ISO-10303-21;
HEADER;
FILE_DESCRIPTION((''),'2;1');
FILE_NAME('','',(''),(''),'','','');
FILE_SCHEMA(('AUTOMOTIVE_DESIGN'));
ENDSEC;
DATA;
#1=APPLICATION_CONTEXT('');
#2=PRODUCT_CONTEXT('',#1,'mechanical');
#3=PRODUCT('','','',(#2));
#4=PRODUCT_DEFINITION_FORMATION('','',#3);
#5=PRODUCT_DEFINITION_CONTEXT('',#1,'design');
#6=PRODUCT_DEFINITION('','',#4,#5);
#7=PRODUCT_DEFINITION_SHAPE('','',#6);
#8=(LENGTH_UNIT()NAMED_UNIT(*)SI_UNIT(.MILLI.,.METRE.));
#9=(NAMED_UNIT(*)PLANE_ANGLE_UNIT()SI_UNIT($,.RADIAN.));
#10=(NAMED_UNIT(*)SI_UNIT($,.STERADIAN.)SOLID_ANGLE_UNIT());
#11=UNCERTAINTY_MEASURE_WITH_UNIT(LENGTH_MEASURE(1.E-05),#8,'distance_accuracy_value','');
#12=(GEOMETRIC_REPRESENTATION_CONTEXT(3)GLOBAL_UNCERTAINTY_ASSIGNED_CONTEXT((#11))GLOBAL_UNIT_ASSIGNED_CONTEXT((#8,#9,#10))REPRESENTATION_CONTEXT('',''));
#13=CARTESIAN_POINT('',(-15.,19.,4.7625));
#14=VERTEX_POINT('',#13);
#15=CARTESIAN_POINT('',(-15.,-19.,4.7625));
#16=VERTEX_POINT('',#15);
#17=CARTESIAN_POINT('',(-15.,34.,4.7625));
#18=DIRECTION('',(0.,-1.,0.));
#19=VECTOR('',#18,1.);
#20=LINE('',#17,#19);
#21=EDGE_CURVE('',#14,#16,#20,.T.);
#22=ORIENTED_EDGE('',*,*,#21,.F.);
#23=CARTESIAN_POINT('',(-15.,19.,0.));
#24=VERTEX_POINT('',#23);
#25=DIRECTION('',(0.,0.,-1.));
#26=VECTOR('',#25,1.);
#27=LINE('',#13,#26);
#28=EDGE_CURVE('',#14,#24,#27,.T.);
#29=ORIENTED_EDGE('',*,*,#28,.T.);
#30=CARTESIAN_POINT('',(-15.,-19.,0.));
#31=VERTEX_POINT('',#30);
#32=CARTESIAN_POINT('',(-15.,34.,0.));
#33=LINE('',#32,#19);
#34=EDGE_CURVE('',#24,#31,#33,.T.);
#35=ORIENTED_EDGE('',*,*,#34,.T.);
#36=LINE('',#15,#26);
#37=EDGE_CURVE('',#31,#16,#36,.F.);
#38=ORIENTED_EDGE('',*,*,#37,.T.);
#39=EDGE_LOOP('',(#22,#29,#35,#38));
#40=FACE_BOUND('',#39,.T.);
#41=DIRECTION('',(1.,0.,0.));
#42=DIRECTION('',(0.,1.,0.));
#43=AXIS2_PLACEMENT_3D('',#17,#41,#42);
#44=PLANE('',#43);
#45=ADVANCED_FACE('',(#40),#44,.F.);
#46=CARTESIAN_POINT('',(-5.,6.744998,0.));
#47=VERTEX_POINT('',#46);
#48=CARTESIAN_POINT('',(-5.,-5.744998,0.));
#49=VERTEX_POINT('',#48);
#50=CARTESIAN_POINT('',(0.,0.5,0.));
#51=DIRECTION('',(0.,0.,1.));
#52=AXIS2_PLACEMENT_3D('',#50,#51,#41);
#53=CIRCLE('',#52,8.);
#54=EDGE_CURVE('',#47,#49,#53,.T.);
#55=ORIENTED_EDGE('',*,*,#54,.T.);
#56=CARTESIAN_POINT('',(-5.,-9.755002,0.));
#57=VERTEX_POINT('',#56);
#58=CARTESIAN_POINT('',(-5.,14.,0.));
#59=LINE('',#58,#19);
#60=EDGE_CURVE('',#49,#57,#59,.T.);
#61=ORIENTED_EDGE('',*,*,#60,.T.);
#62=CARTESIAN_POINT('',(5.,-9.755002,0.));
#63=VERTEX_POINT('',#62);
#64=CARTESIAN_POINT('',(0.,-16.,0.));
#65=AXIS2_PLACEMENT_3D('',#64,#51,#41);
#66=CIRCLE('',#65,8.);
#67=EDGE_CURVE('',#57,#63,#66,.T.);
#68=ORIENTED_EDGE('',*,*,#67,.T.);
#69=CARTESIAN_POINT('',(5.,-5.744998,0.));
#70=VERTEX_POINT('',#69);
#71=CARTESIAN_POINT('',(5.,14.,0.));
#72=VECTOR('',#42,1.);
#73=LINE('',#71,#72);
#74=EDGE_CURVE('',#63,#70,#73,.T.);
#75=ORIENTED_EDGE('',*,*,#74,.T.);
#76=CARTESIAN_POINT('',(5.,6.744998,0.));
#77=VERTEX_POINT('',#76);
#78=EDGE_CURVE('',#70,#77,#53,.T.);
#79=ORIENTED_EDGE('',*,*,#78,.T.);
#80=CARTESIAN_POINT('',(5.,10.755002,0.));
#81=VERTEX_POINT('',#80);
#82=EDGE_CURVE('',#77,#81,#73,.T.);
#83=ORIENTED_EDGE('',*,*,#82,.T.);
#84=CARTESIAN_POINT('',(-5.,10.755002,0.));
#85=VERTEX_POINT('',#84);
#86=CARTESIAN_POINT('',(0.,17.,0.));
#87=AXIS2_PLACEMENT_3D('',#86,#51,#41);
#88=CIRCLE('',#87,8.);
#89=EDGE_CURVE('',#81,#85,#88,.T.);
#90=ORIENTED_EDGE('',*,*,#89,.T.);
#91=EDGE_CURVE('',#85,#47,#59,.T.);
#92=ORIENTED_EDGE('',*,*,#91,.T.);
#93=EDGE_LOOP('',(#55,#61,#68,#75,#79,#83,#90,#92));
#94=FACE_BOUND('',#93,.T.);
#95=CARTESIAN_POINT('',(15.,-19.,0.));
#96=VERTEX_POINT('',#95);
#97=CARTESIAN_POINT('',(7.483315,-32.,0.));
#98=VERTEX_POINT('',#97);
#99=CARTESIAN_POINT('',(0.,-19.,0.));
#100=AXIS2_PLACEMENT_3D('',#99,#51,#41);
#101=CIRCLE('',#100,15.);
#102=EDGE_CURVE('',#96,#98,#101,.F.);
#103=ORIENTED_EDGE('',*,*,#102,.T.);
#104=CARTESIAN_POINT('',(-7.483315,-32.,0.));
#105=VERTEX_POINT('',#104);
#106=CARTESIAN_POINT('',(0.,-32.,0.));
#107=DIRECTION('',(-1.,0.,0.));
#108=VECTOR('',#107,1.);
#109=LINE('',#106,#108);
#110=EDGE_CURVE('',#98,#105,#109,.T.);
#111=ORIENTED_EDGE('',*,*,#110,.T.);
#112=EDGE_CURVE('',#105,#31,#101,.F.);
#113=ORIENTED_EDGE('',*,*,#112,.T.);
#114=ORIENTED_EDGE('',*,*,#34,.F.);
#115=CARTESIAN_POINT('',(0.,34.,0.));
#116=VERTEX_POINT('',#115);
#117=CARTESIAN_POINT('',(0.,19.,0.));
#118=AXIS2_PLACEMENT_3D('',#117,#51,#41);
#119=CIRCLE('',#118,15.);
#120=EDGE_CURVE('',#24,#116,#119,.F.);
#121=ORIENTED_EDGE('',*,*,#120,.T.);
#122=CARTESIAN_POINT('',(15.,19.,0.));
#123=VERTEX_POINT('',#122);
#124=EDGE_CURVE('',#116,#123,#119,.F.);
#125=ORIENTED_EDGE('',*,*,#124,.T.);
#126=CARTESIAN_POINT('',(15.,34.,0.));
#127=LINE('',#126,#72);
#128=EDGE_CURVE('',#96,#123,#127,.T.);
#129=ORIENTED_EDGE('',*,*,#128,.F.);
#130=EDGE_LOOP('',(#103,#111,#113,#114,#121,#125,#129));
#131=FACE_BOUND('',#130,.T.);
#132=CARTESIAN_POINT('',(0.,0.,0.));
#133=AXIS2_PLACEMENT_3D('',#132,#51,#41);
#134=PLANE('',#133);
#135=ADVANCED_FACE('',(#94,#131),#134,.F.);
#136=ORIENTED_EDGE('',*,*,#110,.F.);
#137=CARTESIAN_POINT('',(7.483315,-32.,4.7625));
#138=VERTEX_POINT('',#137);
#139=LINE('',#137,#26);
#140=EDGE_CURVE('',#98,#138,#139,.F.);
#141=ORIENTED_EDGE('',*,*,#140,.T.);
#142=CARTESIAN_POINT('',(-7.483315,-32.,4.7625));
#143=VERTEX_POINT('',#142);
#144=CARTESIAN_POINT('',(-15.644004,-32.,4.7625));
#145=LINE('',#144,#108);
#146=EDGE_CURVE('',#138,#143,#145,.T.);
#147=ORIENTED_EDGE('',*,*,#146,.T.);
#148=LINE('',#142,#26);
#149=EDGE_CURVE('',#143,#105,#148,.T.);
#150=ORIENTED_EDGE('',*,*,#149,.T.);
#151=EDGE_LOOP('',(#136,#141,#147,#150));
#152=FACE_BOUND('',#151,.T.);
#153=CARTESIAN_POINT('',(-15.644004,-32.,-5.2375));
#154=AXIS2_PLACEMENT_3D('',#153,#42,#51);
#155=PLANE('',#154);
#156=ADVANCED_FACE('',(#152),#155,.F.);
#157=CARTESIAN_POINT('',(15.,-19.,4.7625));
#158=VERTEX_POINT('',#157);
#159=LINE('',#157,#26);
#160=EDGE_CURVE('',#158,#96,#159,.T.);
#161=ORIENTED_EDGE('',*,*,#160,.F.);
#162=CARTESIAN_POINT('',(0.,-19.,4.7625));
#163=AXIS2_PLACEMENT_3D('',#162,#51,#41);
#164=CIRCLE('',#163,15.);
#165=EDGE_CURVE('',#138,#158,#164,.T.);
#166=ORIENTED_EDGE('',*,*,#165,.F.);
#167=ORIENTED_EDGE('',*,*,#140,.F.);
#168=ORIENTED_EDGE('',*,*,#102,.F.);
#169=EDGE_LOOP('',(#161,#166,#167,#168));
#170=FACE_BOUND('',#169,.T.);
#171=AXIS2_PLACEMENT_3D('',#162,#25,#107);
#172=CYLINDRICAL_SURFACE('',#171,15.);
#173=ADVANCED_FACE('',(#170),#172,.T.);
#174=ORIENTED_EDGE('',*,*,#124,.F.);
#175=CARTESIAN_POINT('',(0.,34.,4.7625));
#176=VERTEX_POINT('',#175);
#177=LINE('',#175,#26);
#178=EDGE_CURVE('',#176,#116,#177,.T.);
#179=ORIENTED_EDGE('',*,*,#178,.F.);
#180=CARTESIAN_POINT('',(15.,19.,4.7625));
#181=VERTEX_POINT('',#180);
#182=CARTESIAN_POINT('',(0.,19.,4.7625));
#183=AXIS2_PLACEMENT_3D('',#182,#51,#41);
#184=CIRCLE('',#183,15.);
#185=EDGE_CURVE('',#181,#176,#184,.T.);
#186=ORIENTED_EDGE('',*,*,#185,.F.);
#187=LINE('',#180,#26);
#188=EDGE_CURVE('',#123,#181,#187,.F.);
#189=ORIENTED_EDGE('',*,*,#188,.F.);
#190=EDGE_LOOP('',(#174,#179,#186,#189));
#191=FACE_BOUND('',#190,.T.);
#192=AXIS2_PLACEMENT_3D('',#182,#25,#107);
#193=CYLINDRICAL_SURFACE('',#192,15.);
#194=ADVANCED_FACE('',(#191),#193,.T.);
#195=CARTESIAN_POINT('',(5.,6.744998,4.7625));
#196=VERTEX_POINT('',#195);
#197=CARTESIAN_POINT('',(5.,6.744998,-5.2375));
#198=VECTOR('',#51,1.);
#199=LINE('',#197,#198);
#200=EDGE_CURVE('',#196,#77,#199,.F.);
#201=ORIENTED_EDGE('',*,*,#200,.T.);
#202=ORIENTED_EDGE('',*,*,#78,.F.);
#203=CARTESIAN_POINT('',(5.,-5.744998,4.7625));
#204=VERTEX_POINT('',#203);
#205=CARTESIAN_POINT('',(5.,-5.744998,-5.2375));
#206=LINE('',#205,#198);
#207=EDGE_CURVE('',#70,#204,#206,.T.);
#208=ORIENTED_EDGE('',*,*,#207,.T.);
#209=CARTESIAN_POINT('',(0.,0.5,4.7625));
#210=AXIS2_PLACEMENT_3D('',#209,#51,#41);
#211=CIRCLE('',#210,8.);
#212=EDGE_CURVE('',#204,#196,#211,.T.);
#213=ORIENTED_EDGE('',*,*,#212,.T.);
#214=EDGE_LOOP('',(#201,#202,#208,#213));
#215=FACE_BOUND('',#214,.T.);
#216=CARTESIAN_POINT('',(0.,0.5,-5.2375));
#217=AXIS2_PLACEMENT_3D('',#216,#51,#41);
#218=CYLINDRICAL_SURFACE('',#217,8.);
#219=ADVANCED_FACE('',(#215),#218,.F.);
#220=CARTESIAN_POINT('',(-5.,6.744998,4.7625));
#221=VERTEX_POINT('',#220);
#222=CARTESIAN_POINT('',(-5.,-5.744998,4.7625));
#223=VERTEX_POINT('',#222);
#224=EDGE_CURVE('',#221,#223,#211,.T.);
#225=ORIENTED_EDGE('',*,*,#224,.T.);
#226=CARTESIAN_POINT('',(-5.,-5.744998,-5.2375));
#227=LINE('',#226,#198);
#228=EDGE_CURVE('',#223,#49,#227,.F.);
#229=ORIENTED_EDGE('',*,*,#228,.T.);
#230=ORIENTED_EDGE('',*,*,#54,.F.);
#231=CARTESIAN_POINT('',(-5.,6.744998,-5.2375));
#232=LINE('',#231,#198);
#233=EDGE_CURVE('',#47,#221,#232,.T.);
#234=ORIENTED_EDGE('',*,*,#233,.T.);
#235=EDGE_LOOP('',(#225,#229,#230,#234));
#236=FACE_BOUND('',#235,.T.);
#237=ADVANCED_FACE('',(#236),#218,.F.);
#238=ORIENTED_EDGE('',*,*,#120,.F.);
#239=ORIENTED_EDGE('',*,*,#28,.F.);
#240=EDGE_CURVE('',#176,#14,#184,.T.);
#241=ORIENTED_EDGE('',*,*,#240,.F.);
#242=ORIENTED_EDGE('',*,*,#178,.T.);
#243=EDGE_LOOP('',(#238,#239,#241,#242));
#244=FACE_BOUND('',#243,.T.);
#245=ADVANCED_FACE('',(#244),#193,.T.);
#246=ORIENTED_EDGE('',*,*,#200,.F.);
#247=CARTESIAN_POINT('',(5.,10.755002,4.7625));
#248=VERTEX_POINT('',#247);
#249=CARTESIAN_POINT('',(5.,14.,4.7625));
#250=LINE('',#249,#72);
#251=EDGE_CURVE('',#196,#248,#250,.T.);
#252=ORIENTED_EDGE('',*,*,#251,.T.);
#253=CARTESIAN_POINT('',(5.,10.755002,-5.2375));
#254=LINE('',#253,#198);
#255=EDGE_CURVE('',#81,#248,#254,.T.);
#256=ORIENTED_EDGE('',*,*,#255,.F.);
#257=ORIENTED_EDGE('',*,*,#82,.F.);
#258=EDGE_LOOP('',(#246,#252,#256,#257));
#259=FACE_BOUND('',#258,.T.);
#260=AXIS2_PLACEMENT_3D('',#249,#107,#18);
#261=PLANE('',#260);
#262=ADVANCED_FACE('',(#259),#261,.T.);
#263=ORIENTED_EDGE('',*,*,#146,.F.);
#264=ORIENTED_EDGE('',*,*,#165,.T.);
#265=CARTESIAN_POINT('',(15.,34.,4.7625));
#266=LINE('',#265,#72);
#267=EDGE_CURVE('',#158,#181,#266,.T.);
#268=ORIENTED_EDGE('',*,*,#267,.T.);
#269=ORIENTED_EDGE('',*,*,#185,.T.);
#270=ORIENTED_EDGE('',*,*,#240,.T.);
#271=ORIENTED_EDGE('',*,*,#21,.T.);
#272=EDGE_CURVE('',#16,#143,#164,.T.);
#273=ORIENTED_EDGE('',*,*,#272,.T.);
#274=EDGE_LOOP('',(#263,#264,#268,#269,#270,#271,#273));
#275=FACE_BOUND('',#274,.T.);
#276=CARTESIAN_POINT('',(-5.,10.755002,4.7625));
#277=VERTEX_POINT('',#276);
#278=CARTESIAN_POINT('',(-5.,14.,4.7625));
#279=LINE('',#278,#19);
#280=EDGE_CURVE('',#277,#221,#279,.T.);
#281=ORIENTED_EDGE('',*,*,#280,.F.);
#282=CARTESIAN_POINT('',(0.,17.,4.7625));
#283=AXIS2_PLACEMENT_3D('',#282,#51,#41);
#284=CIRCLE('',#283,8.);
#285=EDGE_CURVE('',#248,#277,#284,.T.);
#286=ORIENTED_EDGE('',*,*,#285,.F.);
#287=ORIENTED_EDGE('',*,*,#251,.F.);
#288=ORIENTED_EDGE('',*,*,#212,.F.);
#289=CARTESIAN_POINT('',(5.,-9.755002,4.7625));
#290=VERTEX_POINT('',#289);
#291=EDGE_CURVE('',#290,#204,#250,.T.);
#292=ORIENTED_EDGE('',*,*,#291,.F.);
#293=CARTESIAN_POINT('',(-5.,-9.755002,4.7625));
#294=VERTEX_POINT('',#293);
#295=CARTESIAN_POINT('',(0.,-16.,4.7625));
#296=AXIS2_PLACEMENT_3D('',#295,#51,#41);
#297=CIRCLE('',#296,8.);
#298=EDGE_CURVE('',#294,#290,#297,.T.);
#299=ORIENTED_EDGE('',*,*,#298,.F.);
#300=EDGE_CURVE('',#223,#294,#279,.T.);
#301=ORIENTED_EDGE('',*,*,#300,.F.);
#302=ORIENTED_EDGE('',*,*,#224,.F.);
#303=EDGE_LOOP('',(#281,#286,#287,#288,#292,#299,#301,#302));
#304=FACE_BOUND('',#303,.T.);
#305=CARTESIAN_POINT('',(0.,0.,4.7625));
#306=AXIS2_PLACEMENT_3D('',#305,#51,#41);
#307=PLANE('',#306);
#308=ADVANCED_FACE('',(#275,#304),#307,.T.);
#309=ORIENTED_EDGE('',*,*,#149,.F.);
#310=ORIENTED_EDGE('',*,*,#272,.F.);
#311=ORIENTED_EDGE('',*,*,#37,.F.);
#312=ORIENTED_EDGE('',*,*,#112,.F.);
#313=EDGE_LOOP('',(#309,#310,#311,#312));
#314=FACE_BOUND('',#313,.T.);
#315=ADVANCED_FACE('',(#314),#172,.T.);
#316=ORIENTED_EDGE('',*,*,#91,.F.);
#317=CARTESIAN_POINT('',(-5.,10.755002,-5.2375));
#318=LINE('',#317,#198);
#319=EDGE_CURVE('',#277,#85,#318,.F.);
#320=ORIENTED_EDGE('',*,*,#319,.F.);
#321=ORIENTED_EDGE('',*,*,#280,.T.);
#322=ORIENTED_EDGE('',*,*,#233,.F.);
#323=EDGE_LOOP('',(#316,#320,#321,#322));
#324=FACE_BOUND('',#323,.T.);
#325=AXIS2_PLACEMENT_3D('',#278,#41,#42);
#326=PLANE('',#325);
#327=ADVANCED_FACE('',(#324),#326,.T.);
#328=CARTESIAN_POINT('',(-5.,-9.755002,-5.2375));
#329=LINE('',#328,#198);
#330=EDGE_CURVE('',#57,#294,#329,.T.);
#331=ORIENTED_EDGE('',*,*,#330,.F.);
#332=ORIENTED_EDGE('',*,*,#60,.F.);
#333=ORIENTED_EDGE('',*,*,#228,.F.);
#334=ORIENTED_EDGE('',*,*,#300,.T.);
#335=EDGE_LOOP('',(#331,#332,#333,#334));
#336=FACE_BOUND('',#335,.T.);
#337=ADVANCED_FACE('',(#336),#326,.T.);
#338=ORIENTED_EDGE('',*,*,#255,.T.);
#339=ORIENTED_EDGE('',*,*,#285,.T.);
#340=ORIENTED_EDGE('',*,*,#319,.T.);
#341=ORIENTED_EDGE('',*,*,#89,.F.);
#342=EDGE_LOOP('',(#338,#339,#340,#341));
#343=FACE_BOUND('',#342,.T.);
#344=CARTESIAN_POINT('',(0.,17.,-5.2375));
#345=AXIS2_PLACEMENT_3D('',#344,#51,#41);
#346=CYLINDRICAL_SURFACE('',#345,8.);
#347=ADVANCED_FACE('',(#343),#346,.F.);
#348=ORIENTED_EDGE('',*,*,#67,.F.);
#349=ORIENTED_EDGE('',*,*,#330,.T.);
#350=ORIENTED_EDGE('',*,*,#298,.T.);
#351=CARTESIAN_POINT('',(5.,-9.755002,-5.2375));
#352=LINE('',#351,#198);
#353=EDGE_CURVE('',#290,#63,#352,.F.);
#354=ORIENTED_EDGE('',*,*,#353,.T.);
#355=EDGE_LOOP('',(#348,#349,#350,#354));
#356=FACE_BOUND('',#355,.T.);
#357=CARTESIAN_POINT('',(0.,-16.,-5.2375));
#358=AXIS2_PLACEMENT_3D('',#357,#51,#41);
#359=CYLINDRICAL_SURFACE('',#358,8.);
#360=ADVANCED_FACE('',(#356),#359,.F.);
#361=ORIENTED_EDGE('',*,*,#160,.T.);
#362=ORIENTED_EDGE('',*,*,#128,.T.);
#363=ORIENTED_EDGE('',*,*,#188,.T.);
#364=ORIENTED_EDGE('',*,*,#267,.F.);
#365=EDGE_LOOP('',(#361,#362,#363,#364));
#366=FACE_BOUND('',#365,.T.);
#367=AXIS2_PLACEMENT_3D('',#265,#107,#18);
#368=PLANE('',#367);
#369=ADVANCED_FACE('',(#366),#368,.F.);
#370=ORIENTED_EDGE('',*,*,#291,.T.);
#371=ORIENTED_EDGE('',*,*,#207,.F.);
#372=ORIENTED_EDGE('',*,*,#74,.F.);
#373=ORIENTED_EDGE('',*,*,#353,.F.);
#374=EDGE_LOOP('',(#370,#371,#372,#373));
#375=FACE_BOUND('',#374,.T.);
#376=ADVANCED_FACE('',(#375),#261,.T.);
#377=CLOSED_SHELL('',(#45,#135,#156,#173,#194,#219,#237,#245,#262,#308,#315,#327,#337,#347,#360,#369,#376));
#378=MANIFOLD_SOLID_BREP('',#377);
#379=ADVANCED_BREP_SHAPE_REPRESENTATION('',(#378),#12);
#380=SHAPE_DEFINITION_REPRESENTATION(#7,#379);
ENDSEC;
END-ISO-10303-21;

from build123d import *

# Parameters (mm, degrees)
CROQUIS1_W              = 30
CROQUIS1_H              = 68
SALIENTE_EXTRUIR1_DEPTH = 4.7625
REDONDEO1_R             = 15
CROQUIS2_R              = 8
CORTAR_EXTRUIR1_DEPTH   = 10
CROQUIS3_W              = 31.404872341
CROQUIS3_H              = 7.197905048
CORTAR_EXTRUIR2_DEPTH   = 10


with BuildPart() as part:
    # Croquis1 → Saliente-Extruir1 (new body)
    with BuildSketch(Plane.XY):
        Rectangle(CROQUIS1_W, CROQUIS1_H)
        with BuildLine():
            Line((5, 14), (5, -14))
            ThreePointArc((5, -14), (0, -19), (-5, -14))
            Line((-5, -14), (-5, 14))
            ThreePointArc((-5, 14), (0, 19), (5, 14))
        make_face(mode=Mode.SUBTRACT)
    extrude(amount=SALIENTE_EXTRUIR1_DEPTH)

    # Redondeo1
    redondeo1_edges = [part.edges().sort_by_distance(p)[0] for p in [
        (15, -34, 2.38125),
        (-15, -34, 2.38125),
        (-15, 34, 2.38125),
        (15, 34, 2.38125),
    ]]
    fillet(redondeo1_edges, radius=REDONDEO1_R - 0.0001)  # a hair under: the kernel refuses the full size

    # Croquis2 → Cortar-Extruir1 (cut)
    with BuildSketch(Plane.XY.offset(4.7625)):
        with Locations((0, 17)):
            Circle(CROQUIS2_R)
        with Locations((0, 0.5)):
            Circle(CROQUIS2_R)
        with Locations((0, -16)):
            Circle(CROQUIS2_R)
    extrude(amount=-CORTAR_EXTRUIR1_DEPTH, mode=Mode.SUBTRACT)

    # Croquis3 → Cortar-Extruir2 (cut)
    with BuildSketch(Plane.XY.offset(4.7625)):
        with Locations((0.058431815, -35.598952524)):
            Rectangle(CROQUIS3_W, CROQUIS3_H)
    extrude(amount=-CORTAR_EXTRUIR2_DEPTH, mode=Mode.SUBTRACT)


solid = part.part
